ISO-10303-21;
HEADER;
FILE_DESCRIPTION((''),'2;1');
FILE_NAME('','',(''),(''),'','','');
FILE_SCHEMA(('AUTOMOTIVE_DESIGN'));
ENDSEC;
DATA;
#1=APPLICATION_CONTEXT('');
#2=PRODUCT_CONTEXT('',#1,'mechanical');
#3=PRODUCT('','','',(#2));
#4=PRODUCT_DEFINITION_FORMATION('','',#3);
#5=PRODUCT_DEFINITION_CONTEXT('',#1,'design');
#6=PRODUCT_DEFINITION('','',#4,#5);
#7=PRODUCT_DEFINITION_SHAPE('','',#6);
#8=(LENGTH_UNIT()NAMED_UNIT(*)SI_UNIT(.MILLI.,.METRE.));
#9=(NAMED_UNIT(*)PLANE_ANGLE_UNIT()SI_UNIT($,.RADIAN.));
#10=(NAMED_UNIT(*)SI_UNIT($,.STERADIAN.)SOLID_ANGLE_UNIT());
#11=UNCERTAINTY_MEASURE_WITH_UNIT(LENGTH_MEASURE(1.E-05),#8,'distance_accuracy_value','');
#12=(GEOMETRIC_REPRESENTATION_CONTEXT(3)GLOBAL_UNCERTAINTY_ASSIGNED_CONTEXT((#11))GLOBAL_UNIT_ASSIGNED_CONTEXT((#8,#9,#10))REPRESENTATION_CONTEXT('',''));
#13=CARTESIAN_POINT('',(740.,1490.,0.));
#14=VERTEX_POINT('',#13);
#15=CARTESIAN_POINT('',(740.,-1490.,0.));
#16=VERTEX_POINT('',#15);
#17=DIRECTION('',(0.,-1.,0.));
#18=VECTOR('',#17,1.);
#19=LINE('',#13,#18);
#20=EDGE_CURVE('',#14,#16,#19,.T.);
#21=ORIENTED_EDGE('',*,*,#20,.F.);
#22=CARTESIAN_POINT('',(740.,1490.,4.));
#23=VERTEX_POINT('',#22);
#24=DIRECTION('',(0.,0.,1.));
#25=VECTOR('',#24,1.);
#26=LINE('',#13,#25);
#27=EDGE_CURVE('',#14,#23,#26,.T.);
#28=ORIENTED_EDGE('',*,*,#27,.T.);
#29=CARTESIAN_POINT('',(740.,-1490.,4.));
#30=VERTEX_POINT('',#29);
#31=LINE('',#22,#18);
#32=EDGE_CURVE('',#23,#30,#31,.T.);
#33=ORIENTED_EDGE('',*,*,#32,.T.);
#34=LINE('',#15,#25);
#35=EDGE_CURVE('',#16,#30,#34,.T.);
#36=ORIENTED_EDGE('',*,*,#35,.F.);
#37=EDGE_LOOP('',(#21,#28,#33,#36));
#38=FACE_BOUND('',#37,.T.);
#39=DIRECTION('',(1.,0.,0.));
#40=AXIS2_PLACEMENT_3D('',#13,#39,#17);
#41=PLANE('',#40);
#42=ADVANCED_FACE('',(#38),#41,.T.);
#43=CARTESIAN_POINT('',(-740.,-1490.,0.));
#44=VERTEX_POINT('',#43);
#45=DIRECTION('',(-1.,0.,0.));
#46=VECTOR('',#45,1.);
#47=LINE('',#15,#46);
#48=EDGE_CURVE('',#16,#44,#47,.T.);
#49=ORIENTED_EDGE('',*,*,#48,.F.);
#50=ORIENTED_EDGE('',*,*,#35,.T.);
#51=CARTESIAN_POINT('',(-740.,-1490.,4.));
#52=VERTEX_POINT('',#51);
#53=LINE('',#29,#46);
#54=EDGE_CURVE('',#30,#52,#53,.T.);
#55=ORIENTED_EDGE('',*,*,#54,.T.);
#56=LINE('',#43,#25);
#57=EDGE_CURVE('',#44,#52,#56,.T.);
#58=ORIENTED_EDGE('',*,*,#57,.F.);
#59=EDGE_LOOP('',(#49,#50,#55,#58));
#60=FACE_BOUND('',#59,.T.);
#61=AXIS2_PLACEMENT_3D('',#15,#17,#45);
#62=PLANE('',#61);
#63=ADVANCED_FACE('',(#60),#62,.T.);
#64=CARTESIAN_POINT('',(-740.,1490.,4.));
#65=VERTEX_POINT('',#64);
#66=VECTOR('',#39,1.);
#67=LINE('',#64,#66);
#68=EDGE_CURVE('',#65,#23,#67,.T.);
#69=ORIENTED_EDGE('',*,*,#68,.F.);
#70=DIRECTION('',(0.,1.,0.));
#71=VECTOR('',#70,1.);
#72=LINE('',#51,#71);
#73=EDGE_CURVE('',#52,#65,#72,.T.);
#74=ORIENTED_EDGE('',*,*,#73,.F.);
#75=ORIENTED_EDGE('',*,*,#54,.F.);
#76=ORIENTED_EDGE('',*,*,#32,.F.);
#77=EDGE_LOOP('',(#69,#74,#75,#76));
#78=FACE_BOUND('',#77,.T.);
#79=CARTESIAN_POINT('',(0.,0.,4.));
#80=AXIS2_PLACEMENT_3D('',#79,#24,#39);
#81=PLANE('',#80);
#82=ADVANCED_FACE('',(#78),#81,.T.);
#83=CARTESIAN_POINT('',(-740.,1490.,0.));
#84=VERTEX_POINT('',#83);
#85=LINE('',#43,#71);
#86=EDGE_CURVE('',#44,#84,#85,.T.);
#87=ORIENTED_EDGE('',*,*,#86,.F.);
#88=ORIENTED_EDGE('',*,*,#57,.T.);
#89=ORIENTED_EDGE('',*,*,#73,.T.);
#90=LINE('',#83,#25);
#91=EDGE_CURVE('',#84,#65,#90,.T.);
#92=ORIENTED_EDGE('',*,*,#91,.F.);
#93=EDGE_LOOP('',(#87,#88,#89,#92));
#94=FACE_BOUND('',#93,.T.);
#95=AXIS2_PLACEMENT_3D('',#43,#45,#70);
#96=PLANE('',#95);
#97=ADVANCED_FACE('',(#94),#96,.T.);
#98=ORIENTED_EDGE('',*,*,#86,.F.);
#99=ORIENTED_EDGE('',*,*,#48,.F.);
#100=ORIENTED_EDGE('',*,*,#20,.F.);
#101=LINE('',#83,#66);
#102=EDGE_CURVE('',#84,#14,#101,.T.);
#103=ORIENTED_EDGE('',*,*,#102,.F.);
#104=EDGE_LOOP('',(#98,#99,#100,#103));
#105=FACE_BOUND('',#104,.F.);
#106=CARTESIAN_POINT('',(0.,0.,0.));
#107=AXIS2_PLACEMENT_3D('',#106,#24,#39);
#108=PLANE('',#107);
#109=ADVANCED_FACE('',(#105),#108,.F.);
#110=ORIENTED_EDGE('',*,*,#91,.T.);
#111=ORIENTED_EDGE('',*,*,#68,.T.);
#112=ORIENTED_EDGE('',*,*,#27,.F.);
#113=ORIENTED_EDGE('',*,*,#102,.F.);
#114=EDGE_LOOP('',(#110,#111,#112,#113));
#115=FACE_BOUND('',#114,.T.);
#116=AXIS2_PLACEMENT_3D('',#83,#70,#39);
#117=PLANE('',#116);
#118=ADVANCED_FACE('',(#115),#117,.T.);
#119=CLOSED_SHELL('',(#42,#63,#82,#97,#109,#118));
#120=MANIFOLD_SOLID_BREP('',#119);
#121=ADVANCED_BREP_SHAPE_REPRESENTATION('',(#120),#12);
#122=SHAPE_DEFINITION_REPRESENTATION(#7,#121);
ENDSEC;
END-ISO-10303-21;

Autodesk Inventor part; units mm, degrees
ref_plane "YZ Plane" through (0, 0, 0) normal (1, 0, 0) x (0, 1, 0)
ref_plane "XZ Plane" through (0, 0, 0) normal (0, 1, 0) x (-1, 0, 0)
ref_plane "XY Plane" through (0, 0, 0) normal (0, 0, 1) x (1, 0, 0)
sketch "Sketch1" plane through (0, 0, 0) normal (0, 0, 1) x (1, 0, 0)
  line L0 (740, -1490) -> (-740, -1490)
  line L1 (-740, -1490) -> (-740, 1490)
  line L2 (-740, 1490) -> (740, 1490)
  line L3 (740, 1490) -> (740, -1490)
  line L4 (740, -1490) -> (-740, 1490) construction
  line L5 (-740, -1490) -> (740, 1490) construction
  point P0 (0, 0)
  dimension "d0" = 1480
  dimension "d1" = 2980
extrude "Plate2" add sketch "Sketch1" along normal blind 4
sketch "Sketch4" plane through (0, 0, 4) normal (0, 0, 1) x (1, 0, 0)
  line L0 (507.8568, -1305.8232) -> (507.8568, -1663.5137) construction
  line L1 (507.8568, -1663.5137) -> (476.5926, -1663.5137) construction
  line L2 (476.5926, -1663.5137) -> (476.5926, -1305.8232) construction
  line L3 (476.5926, -1305.8232) -> (507.8568, -1305.8232) construction
  line L4 (210.5058, -1238) -> (210.5058, -1335) projected
  line L5 (210.5058, -1335) -> (206.5068, -1335) projected
  line L6 (-289.6228, -1238) -> (-289.6228, -1335) projected
  line L7 (-289.6228, -1335) -> (-293.6218, -1335) projected
  ellipse E0 centre (210.5058, 1490.5) end of major axis (210.5058, 1520.5) minor radius 0.6803 (210.5058, 1460.5) -> (210.5058, 1520.5) ccw projected
  line L8 (210.5058, 1460.5) -> (206.5068, 1460.5) projected
  ellipse E1 centre (-289.6228, 1490.5) end of major axis (-289.6228, 1520.5) minor radius 0.6803 (-289.6228, 1460.5) -> (-289.6228, 1520.5) ccw projected
  line L9 (-289.6228, 1460.5) -> (-293.6218, 1460.5) projected
  line L10 (710, -1234.5) -> (710, -1230.5) projected
  line L11 (710, -737.8333) -> (710, -733.8333) projected
  line L12 (710, -241.1667) -> (710, -237.1667) projected
  line L13 (710, 255.5) -> (710, 259.5) projected
  line L14 (710, 752.1667) -> (710, 756.1667) projected
  line L15 (710, 1248.8333) -> (710, 1252.8333) projected
  line L16 (-739.3197, -1234.5) -> (-710, -1234.5) projected
  line L17 (-710, -1234.5) -> (-710, -1230.5) projected
  line L18 (-739.3197, -737.8333) -> (-710, -737.8333) projected
  line L19 (-710, -737.8333) -> (-710, -733.8333) projected
  line L20 (-739.3197, -241.1667) -> (-710, -241.1667) projected
  line L21 (-710, -241.1667) -> (-710, -237.1667) projected
  line L22 (-739.3197, 255.5) -> (-710, 255.5) projected
  line L23 (-710, 255.5) -> (-710, 259.5) projected
  line L24 (-739.3197, 752.1667) -> (-710, 752.1667) projected
  line L25 (-710, 752.1667) -> (-710, 756.1667) projected
  line L26 (-739.3197, 1248.8333) -> (-710, 1248.8333) projected
  line L27 (-710, 1248.8333) -> (-710, 1252.8333) projected
  line L28 (710, 1248.8333) -> (680, 1248.8333)
  line L29 (710, 752.1667) -> (680, 752.1667)
  line L30 (710, 255.5) -> (680, 255.5)
  line L31 (710, -241.1667) -> (680, -241.1667)
  line L32 (710, -737.8333) -> (680, -737.8333)
  line L33 (710, -1234.5) -> (680, -1234.5)
  point P0 (0, 0)
  dimension "d10" = 30
  dimension "d11" = 30
  dimension "d12" = 30
  dimension "d13" = 30
  dimension "d14" = 30
  dimension "d15" = 30
mark "Mark2"
equation "\"d0\" = Лист_ширина"
equation "\"d3\" = Thickness"
equation "\"BendRadius\" = Thickness"
equation "\"BendReliefWidth\" = Thickness"
equation "\"BendReliefDepth\" = 0.5 * Thickness"
equation "\"CornerReliefSize\" = 4 * Thickness"
equation "\"MinimumRemnant\" = 2 * Thickness"
equation "\"TransitionRadius\" = BendRadius"
equation "\"JacobiRadiusSize\" = BendRadius"
equation "\"GapSize\" = Thickness"
equation "\"Лист_ширина\" = 1480"
equation "\"Thickness\" = 4"
properties part number "GBK 1325 shield 1.2" material "Steel"
